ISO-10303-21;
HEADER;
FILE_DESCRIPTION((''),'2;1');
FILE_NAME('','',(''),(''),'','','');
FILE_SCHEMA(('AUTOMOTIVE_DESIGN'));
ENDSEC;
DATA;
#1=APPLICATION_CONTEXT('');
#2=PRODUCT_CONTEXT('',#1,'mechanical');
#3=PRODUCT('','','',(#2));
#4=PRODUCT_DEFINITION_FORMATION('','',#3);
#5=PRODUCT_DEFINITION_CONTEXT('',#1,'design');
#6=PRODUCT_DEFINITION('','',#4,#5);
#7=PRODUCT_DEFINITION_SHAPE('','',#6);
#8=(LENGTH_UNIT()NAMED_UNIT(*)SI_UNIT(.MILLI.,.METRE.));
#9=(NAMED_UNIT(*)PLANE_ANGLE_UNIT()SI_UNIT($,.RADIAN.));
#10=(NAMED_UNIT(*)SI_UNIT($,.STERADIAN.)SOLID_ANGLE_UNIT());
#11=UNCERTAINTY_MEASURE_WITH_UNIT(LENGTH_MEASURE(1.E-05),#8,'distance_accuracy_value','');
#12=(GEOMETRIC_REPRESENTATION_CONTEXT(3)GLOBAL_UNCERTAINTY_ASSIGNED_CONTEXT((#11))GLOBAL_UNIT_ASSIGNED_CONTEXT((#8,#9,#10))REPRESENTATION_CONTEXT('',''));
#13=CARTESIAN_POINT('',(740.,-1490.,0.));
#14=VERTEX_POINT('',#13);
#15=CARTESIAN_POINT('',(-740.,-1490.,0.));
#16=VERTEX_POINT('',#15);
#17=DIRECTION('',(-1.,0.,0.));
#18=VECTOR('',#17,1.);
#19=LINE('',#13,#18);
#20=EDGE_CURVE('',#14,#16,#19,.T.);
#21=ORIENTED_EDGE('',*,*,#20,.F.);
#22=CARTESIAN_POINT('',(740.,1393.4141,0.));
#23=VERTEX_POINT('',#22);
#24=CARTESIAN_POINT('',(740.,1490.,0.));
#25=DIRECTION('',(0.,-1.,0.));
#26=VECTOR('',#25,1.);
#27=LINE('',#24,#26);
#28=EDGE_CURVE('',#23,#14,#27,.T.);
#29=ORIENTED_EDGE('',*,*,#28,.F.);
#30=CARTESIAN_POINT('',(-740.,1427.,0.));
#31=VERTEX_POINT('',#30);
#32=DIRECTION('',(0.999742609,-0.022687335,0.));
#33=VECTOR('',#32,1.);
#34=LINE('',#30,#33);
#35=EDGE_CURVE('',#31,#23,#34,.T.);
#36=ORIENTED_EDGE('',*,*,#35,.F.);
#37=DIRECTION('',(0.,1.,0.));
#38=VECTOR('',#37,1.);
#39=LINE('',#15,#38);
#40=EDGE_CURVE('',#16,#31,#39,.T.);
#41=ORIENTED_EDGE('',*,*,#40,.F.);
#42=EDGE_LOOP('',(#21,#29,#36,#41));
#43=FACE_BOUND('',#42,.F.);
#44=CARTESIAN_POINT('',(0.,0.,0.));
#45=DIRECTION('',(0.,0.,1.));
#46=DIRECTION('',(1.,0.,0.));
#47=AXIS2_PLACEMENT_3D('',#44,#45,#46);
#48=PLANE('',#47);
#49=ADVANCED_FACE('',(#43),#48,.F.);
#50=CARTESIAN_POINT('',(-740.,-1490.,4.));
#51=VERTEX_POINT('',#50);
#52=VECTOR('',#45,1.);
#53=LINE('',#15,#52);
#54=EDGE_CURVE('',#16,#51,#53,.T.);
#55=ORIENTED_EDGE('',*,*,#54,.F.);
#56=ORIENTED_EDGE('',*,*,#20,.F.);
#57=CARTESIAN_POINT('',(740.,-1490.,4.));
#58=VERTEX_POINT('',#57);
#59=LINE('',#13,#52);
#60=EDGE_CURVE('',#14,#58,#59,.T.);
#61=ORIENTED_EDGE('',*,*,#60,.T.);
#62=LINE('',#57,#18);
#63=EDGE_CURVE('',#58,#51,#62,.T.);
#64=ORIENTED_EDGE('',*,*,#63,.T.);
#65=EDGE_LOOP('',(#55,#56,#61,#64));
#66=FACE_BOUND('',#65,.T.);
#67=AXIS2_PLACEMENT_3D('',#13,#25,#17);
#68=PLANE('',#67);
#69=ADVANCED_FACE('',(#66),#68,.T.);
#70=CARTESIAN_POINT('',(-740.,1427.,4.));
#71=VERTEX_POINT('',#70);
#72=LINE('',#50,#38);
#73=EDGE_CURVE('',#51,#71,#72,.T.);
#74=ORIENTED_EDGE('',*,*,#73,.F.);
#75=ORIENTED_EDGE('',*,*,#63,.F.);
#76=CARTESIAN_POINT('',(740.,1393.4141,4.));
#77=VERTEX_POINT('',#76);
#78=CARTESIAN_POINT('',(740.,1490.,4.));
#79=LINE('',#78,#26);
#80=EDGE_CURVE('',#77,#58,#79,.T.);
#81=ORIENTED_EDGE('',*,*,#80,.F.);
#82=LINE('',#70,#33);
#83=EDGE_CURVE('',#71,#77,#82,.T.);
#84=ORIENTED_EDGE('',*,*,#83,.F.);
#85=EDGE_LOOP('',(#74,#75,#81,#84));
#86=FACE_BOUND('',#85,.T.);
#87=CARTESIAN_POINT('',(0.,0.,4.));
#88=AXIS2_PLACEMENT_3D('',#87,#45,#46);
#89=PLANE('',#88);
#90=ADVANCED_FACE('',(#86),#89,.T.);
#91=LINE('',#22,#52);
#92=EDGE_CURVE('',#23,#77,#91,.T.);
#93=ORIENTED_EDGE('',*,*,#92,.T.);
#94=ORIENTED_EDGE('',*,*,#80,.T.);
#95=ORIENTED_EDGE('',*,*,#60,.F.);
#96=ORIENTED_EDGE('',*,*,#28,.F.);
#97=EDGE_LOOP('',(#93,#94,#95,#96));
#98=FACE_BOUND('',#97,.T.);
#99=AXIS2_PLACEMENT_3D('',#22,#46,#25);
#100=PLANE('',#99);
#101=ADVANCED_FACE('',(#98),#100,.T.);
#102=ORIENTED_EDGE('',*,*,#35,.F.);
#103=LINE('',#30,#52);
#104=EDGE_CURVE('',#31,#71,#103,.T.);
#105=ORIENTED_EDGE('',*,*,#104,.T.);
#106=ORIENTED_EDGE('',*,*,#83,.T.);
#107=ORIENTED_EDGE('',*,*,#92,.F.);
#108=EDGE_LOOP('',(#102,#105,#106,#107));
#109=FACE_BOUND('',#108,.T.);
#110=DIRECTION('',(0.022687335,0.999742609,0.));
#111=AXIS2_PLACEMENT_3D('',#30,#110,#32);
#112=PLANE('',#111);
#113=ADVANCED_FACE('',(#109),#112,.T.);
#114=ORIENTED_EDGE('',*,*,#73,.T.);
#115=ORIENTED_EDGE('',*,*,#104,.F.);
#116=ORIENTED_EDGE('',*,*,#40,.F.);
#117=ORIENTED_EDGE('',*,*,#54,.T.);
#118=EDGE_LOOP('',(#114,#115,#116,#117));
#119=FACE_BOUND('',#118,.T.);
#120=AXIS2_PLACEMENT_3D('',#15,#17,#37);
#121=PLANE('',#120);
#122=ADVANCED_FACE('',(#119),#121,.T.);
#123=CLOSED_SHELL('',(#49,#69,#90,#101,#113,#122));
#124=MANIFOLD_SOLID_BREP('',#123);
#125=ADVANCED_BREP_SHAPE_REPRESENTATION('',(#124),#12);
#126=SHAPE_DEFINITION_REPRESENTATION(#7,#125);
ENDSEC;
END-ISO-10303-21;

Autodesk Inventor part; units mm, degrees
ref_plane "YZ Plane" through (0, 0, 0) normal (1, 0, 0) x (0, 1, 0)
ref_plane "XZ Plane" through (0, 0, 0) normal (0, 1, 0) x (-1, 0, 0)
ref_plane "XY Plane" through (0, 0, 0) normal (0, 0, 1) x (1, 0, 0)
sketch "Sketch1" plane through (0, 0, 0) normal (0, 0, 1) x (1, 0, 0)
  line L0 (740, -1490) -> (-740, -1490)
  line L1 (-740, -1490) -> (-740, 1490)
  line L2 (-740, 1490) -> (740, 1490)
  line L3 (740, 1490) -> (740, -1490)
  line L4 (740, -1490) -> (-740, 1490) construction
  line L5 (-740, -1490) -> (740, 1490) construction
  line L6 (-740, 1427) -> (740, 1393.4141)
  point P0 (0, 0)
  dimension "d0" = 1480
  dimension "d1" = 2980
  dimension "d3" = 63
  dimension "d4" = 1.3
extrude "Plate1" add sketch "Sketch1" along normal blind 4 contours L0 L1 L6 L3
sketch "Эскиз2" plane through (0, 0, 4) normal (0, 0, 1) x (1, 0, 0)
  line L0 (-500.3754, 1312.2758) -> (-500.3754, 1810.412) construction
  line L1 (-500.3754, 1810.412) -> (-460.7482, 1810.412) construction
  line L2 (-460.7482, 1810.412) -> (-460.7482, 1312.2758) construction
  line L3 (-460.7482, 1312.2758) -> (-500.3754, 1312.2758) construction
  line L4 (-689.2413, 1238) -> (-689.2413, 1335) projected
  line L5 (-689.2413, 1335) -> (-685.2413, 1335) projected
  line L6 (-189.3681, 1238) -> (-189.3681, 1335) projected
  line L7 (-189.3681, 1335) -> (-185.3681, 1335) projected
  line L8 (310.5051, 1238) -> (310.5051, 1335) projected
  line L9 (310.5051, 1335) -> (314.5051, 1335) projected
  line L10 (-689.2413, -1460.5) -> (-689.2413, -1520.5) projected
  line L11 (-689.2413, -1460.5) -> (-685.2413, -1460.5) projected
  line L12 (-189.3681, -1460.5) -> (-189.3681, -1520.5) projected
  line L13 (-189.3681, -1460.5) -> (-185.3681, -1460.5) projected
  line L14 (310.5051, -1460.5) -> (310.5051, -1520.5) projected
  line L15 (310.5051, -1460.5) -> (314.5051, -1460.5) projected
  line L16 (-709.6246, 1234.5) -> (-769.6246, 1234.5) projected
  line L17 (-709.6246, 1234.5) -> (-709.6246, 1230.5) projected
  line L18 (-709.6246, 737.8333) -> (-769.6246, 737.8333) projected
  line L19 (-709.6246, 737.8333) -> (-709.6246, 733.8333) projected
  line L20 (-709.6246, 241.1667) -> (-769.6246, 241.1667) projected
  line L21 (-709.6246, 241.1667) -> (-709.6246, 237.1667) projected
  line L22 (-709.6246, -255.5) -> (-769.6246, -255.5) projected
  line L23 (-709.6246, -255.5) -> (-709.6246, -259.5) projected
  line L24 (-709.6246, -752.1667) -> (-769.6246, -752.1667) projected
  line L25 (-709.6246, -752.1667) -> (-709.6246, -756.1667) projected
  line L26 (-709.6246, -1248.8333) -> (-769.6246, -1248.8333) projected
  line L27 (-709.6246, -1248.8333) -> (-709.6246, -1252.8333) projected
  line L28 (740, 1234.5) -> (710, 1234.5) projected
  line L29 (710, 1234.5) -> (710, 1230.5) projected
  line L30 (740, 737.8333) -> (710, 737.8333) projected
  line L31 (710, 737.8333) -> (710, 733.8333) projected
  line L32 (740, 241.1667) -> (710, 241.1667) projected
  line L33 (710, 241.1667) -> (710, 237.1667) projected
  line L34 (740, -255.5) -> (710, -255.5) projected
  line L35 (710, -255.5) -> (710, -259.5) projected
  line L36 (740, -752.1667) -> (710, -752.1667) projected
  line L37 (710, -752.1667) -> (710, -756.1667) projected
  line L38 (740, -1248.8333) -> (710, -1248.8333) projected
  line L39 (710, -1248.8333) -> (710, -1252.8333) projected
  point P0 (0, 0)
mark "Маркировка1"
equation "\"d0\" = Лист_ширина"
equation "\"d2\" = Thickness"
equation "\"BendRadius\" = Thickness"
equation "\"BendReliefWidth\" = Thickness"
equation "\"BendReliefDepth\" = 0.5 * Thickness"
equation "\"CornerReliefSize\" = 4 * Thickness"
equation "\"MinimumRemnant\" = 2 * Thickness"
equation "\"TransitionRadius\" = BendRadius"
equation "\"JacobiRadiusSize\" = BendRadius"
equation "\"GapSize\" = Thickness"
equation "\"Лист_ширина\" = 1480"
equation "\"Thickness\" = 4"
properties part number "GBK 3214 shield 4" material "Steel"
